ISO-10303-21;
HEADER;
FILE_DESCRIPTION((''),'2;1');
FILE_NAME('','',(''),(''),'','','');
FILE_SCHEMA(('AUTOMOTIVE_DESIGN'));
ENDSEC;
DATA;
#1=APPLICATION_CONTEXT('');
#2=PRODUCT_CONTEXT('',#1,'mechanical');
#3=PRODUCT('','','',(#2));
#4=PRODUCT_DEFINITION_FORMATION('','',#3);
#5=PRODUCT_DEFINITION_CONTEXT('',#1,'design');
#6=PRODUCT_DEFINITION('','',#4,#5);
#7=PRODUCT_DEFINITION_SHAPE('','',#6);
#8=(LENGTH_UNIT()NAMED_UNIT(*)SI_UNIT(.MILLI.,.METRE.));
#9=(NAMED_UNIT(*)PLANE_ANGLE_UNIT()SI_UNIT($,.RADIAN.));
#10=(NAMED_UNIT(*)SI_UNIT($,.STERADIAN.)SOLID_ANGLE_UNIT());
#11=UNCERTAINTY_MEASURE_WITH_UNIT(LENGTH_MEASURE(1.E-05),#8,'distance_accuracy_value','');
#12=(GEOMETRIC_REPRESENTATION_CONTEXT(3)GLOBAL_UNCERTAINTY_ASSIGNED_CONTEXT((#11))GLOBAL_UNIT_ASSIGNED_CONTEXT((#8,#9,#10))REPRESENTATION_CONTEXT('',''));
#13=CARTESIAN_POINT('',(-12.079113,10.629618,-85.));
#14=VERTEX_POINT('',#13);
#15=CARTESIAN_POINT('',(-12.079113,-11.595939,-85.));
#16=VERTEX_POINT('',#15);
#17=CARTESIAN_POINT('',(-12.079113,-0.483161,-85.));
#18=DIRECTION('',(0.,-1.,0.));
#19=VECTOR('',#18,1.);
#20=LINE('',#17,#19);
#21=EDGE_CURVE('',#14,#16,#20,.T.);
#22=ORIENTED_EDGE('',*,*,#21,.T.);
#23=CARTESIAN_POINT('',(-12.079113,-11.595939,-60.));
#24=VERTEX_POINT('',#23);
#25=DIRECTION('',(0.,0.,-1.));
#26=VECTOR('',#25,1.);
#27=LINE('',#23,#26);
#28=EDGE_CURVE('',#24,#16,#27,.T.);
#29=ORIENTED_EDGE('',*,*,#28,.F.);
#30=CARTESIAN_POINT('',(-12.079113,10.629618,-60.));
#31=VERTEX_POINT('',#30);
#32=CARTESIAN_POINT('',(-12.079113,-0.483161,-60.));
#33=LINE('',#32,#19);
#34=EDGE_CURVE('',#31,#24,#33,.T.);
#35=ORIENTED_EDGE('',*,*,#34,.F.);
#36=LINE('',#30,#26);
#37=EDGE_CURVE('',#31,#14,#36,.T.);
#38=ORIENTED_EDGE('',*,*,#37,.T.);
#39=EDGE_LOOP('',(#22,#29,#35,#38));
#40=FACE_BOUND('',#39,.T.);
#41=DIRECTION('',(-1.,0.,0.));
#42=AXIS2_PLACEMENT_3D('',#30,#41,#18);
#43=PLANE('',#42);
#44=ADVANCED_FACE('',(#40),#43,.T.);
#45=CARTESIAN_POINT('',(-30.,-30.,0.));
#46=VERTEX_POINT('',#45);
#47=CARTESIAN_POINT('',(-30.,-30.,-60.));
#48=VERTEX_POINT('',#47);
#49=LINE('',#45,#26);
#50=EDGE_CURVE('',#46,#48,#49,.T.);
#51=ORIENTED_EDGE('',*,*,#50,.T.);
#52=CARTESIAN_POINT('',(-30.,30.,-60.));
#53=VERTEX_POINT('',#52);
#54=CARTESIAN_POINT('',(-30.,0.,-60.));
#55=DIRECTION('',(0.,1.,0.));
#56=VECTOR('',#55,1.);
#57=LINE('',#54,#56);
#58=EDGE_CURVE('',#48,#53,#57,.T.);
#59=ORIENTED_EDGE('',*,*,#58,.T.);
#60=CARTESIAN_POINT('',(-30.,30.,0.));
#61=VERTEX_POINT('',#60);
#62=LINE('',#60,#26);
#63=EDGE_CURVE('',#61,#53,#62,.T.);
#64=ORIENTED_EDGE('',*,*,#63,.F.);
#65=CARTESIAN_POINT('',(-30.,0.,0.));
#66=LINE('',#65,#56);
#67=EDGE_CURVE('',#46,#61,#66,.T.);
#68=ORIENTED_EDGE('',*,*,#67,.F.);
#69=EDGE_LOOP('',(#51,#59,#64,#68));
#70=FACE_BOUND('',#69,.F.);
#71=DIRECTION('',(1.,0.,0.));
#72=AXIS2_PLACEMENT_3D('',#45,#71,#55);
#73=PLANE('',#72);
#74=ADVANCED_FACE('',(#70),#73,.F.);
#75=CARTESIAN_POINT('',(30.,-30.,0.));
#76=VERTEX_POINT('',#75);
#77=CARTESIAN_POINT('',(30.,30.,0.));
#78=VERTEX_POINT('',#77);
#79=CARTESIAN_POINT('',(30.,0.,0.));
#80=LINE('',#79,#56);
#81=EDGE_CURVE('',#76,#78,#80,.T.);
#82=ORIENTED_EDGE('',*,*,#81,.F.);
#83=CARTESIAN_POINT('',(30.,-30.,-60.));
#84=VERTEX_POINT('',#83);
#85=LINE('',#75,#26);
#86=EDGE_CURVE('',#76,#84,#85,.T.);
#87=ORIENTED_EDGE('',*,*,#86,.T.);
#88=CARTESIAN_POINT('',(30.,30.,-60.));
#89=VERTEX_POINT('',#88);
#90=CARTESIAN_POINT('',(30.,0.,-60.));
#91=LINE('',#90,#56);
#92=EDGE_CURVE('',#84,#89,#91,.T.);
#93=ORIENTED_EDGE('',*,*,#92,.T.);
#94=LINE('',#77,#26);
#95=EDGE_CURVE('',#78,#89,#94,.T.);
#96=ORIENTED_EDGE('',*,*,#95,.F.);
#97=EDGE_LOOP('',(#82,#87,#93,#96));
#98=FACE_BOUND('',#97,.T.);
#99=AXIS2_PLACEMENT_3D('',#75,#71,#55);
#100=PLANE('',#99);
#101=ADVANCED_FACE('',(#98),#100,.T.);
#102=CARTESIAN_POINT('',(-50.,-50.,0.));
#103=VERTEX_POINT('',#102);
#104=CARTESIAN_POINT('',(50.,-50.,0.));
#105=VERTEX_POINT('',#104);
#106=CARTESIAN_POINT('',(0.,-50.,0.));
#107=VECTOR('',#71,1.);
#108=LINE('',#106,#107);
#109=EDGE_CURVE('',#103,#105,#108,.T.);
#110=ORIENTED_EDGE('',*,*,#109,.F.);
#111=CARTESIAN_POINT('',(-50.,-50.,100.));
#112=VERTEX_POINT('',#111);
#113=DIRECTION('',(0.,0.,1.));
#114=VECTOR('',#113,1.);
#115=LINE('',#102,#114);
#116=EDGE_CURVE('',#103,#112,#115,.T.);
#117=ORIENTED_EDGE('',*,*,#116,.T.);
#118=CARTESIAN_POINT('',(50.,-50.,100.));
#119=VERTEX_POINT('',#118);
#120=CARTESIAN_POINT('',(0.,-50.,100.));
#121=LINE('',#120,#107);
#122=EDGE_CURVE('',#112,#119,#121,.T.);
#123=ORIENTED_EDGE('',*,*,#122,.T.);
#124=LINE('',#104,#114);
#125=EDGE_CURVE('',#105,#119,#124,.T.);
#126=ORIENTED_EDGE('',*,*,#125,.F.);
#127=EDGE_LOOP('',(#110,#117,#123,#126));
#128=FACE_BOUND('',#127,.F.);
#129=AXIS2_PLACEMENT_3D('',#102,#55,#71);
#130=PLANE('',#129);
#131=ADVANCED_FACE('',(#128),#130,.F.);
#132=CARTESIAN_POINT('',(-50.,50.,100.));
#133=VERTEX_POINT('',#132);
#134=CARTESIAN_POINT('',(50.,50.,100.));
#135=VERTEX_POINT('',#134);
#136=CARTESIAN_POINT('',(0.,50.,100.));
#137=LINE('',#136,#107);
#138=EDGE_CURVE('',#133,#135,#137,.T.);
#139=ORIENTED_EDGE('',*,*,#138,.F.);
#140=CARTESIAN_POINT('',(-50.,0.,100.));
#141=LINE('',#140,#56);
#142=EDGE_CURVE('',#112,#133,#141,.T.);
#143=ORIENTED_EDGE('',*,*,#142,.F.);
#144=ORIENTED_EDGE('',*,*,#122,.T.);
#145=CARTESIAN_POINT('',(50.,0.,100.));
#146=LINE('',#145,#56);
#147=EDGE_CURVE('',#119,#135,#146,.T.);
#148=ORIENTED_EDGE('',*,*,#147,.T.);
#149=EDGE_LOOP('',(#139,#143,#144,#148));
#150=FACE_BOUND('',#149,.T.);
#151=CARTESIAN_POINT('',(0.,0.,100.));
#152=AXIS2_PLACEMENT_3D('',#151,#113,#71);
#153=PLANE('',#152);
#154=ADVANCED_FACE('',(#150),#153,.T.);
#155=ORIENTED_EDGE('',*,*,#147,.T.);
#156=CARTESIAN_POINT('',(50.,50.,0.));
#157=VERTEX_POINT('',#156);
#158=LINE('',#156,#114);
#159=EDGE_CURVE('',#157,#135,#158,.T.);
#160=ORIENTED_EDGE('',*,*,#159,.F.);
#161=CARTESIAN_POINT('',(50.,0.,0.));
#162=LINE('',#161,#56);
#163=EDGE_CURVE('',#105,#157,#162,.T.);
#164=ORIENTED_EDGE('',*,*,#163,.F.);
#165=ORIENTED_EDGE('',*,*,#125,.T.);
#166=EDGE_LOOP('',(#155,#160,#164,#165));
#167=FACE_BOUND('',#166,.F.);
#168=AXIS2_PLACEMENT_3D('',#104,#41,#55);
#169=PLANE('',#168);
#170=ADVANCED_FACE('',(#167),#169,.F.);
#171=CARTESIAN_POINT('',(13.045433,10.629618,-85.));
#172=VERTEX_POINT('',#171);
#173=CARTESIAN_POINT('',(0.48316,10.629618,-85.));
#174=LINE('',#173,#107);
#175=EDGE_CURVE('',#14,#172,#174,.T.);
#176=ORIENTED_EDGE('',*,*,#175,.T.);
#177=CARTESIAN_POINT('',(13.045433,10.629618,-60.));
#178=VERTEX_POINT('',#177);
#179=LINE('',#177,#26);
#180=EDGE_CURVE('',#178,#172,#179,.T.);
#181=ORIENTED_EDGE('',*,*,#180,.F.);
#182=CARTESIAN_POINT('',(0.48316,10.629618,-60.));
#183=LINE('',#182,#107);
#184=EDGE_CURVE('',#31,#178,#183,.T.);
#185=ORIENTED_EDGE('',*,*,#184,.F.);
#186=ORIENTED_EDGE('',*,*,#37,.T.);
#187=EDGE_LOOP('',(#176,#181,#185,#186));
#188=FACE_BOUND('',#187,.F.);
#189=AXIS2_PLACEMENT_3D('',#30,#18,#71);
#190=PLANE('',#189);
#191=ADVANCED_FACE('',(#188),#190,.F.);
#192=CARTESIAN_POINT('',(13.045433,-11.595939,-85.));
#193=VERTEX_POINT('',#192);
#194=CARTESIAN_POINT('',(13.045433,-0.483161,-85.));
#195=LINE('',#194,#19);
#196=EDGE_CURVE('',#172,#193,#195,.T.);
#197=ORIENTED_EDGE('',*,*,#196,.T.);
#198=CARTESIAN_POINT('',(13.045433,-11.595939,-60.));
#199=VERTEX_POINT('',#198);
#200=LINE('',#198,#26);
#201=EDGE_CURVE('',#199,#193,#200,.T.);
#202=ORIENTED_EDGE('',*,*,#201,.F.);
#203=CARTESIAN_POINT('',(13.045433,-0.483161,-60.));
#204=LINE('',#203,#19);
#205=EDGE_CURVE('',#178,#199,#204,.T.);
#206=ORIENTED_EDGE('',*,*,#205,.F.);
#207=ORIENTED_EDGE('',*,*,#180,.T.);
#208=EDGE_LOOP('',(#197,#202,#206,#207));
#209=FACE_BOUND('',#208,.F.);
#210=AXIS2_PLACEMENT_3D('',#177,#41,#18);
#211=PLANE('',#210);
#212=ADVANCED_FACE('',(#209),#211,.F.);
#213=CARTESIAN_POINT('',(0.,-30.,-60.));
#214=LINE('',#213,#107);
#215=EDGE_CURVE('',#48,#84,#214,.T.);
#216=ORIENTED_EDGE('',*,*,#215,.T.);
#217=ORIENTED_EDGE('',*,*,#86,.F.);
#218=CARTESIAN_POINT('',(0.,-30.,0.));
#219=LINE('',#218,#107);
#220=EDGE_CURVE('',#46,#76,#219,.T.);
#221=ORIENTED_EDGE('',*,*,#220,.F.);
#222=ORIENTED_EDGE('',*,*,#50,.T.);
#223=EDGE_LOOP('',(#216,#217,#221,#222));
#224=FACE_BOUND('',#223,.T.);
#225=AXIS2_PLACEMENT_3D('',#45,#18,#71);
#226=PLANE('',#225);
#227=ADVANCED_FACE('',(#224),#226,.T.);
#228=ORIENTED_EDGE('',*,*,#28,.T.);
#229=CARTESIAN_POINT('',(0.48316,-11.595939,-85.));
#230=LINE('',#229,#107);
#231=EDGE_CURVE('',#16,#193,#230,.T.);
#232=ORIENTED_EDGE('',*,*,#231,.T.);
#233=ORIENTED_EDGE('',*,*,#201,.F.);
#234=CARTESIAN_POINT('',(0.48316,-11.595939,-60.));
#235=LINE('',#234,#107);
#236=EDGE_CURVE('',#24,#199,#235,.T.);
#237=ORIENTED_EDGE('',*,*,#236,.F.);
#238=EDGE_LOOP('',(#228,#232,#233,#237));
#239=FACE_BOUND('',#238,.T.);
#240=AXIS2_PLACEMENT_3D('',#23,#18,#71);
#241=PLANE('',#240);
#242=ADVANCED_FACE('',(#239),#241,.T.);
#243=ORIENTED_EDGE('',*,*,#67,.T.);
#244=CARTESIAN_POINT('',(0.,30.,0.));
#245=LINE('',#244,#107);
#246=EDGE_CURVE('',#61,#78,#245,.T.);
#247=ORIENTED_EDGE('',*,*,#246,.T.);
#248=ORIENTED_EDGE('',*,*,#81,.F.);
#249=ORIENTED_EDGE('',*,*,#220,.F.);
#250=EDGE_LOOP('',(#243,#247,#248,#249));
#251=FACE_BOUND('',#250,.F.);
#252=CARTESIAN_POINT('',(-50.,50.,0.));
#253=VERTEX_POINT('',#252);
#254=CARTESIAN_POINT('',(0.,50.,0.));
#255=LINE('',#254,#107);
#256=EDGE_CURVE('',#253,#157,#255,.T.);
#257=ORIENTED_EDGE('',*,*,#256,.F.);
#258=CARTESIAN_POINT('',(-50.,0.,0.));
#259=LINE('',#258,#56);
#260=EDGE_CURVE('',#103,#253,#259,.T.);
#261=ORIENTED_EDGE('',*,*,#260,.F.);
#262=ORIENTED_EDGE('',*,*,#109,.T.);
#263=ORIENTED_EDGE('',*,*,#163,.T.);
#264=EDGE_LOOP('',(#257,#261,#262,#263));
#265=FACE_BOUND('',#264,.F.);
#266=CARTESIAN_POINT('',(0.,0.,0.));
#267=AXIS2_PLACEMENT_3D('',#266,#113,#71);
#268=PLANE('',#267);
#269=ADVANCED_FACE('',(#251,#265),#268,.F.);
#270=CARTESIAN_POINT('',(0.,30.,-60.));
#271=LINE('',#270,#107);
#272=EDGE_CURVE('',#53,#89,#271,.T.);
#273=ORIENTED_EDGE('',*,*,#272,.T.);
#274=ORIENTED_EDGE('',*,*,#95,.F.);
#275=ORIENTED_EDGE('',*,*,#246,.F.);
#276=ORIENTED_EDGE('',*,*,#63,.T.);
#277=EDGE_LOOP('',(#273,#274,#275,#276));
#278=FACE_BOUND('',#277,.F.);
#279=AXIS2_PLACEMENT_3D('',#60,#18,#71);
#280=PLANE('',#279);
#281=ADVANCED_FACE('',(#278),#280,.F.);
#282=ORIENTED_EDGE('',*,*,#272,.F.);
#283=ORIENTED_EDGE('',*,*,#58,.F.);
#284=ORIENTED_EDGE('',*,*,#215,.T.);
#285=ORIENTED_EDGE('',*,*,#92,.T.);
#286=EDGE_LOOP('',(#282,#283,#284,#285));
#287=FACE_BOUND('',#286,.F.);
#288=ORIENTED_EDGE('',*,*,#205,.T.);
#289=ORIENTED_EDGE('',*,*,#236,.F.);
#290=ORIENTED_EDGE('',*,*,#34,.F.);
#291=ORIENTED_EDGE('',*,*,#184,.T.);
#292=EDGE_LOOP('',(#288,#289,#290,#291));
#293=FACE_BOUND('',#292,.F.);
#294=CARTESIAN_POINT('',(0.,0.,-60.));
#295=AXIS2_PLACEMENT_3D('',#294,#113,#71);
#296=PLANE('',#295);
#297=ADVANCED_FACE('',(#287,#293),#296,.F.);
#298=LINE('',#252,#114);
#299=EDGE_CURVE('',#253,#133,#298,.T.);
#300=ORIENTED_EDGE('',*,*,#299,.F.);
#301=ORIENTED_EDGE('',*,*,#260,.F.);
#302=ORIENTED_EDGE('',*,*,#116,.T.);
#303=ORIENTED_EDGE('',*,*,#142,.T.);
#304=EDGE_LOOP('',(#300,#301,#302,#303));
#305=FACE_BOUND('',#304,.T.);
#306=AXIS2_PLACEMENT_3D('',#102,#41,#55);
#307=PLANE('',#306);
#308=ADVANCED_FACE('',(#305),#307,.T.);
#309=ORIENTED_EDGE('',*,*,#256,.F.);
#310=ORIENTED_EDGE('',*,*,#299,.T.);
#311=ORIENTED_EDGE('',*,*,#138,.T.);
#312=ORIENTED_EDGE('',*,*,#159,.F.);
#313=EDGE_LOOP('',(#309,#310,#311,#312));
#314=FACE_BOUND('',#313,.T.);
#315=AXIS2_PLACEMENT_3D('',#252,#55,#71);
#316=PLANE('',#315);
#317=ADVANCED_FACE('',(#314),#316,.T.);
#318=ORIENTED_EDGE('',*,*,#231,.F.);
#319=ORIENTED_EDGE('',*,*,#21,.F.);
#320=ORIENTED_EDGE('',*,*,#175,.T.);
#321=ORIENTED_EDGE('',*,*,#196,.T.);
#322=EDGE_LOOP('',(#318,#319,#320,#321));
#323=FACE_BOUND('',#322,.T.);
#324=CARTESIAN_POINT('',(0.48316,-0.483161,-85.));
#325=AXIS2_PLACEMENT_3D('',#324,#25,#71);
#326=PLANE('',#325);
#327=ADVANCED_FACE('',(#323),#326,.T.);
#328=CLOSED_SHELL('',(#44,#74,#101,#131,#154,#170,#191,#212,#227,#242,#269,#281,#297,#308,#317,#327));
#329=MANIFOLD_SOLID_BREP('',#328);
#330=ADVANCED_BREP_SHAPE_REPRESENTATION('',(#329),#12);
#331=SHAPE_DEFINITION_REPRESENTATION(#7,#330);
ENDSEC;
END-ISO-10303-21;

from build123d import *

# Parameters (mm, degrees)
F0_W      = 100
F0_H      = 100
F1_DEPTH  = 100
F2_W      = 21.2592259049
F2_H      = 13.5286012664
F3_DEPTH  = 20
F4_W      = 60
F4_H      = 60
F5_DEPTH  = 60
F7_W      = 35
F7_H      = 27.0690375748
F6_W      = 60
F6_H      = 60
F9_DEPTH  = 100
F10_W     = 25.1245461404
F10_H     = 22.2255568951
F12_DEPTH = 25


# Not quite as in the source:
# - a feature of the source that left no trace in its solid (it failed there, or was rolled back) is left out


with BuildPart() as f1:
    # F0 (on Top) → F1 (new body)
    with BuildSketch(Plane.XY):
        Rectangle(F0_W, F0_H)
    extrude(amount=F1_DEPTH)

    # F2 (on Top) → F3 (join)
    with BuildSketch(Plane.XY):
        Rectangle(F2_W, F2_H)
    extrude(amount=-F3_DEPTH)

    # F4 (on Top) → F5 (join)
    with BuildSketch(Plane.XY):
        Rectangle(F4_W, F4_H)
    extrude(amount=-F5_DEPTH)

    # F7 (on face) + F6 (on face) → F9 (join)
    with BuildSketch(Plane(origin=(0, 0, -60), x_dir=(1, 0, 0), z_dir=(0, 0, -1))):
        Rectangle(F7_W, F7_H)
    with BuildSketch(Plane(origin=(0, 0, -60), x_dir=(1, 0, 0), z_dir=(0, 0, -1))):
        Rectangle(F6_W, F6_H)
    extrude(amount=-F9_DEPTH)

    # F10 (on face) → F12 (join)
    with BuildSketch(Plane(origin=(0, 0, -60), x_dir=(1, 0, 0), z_dir=(0, 0, -1))):
        with Locations((0.4831599072, 0.4831608385)):
            Rectangle(F10_W, F10_H)
    extrude(amount=F12_DEPTH)


solid = f1.part
